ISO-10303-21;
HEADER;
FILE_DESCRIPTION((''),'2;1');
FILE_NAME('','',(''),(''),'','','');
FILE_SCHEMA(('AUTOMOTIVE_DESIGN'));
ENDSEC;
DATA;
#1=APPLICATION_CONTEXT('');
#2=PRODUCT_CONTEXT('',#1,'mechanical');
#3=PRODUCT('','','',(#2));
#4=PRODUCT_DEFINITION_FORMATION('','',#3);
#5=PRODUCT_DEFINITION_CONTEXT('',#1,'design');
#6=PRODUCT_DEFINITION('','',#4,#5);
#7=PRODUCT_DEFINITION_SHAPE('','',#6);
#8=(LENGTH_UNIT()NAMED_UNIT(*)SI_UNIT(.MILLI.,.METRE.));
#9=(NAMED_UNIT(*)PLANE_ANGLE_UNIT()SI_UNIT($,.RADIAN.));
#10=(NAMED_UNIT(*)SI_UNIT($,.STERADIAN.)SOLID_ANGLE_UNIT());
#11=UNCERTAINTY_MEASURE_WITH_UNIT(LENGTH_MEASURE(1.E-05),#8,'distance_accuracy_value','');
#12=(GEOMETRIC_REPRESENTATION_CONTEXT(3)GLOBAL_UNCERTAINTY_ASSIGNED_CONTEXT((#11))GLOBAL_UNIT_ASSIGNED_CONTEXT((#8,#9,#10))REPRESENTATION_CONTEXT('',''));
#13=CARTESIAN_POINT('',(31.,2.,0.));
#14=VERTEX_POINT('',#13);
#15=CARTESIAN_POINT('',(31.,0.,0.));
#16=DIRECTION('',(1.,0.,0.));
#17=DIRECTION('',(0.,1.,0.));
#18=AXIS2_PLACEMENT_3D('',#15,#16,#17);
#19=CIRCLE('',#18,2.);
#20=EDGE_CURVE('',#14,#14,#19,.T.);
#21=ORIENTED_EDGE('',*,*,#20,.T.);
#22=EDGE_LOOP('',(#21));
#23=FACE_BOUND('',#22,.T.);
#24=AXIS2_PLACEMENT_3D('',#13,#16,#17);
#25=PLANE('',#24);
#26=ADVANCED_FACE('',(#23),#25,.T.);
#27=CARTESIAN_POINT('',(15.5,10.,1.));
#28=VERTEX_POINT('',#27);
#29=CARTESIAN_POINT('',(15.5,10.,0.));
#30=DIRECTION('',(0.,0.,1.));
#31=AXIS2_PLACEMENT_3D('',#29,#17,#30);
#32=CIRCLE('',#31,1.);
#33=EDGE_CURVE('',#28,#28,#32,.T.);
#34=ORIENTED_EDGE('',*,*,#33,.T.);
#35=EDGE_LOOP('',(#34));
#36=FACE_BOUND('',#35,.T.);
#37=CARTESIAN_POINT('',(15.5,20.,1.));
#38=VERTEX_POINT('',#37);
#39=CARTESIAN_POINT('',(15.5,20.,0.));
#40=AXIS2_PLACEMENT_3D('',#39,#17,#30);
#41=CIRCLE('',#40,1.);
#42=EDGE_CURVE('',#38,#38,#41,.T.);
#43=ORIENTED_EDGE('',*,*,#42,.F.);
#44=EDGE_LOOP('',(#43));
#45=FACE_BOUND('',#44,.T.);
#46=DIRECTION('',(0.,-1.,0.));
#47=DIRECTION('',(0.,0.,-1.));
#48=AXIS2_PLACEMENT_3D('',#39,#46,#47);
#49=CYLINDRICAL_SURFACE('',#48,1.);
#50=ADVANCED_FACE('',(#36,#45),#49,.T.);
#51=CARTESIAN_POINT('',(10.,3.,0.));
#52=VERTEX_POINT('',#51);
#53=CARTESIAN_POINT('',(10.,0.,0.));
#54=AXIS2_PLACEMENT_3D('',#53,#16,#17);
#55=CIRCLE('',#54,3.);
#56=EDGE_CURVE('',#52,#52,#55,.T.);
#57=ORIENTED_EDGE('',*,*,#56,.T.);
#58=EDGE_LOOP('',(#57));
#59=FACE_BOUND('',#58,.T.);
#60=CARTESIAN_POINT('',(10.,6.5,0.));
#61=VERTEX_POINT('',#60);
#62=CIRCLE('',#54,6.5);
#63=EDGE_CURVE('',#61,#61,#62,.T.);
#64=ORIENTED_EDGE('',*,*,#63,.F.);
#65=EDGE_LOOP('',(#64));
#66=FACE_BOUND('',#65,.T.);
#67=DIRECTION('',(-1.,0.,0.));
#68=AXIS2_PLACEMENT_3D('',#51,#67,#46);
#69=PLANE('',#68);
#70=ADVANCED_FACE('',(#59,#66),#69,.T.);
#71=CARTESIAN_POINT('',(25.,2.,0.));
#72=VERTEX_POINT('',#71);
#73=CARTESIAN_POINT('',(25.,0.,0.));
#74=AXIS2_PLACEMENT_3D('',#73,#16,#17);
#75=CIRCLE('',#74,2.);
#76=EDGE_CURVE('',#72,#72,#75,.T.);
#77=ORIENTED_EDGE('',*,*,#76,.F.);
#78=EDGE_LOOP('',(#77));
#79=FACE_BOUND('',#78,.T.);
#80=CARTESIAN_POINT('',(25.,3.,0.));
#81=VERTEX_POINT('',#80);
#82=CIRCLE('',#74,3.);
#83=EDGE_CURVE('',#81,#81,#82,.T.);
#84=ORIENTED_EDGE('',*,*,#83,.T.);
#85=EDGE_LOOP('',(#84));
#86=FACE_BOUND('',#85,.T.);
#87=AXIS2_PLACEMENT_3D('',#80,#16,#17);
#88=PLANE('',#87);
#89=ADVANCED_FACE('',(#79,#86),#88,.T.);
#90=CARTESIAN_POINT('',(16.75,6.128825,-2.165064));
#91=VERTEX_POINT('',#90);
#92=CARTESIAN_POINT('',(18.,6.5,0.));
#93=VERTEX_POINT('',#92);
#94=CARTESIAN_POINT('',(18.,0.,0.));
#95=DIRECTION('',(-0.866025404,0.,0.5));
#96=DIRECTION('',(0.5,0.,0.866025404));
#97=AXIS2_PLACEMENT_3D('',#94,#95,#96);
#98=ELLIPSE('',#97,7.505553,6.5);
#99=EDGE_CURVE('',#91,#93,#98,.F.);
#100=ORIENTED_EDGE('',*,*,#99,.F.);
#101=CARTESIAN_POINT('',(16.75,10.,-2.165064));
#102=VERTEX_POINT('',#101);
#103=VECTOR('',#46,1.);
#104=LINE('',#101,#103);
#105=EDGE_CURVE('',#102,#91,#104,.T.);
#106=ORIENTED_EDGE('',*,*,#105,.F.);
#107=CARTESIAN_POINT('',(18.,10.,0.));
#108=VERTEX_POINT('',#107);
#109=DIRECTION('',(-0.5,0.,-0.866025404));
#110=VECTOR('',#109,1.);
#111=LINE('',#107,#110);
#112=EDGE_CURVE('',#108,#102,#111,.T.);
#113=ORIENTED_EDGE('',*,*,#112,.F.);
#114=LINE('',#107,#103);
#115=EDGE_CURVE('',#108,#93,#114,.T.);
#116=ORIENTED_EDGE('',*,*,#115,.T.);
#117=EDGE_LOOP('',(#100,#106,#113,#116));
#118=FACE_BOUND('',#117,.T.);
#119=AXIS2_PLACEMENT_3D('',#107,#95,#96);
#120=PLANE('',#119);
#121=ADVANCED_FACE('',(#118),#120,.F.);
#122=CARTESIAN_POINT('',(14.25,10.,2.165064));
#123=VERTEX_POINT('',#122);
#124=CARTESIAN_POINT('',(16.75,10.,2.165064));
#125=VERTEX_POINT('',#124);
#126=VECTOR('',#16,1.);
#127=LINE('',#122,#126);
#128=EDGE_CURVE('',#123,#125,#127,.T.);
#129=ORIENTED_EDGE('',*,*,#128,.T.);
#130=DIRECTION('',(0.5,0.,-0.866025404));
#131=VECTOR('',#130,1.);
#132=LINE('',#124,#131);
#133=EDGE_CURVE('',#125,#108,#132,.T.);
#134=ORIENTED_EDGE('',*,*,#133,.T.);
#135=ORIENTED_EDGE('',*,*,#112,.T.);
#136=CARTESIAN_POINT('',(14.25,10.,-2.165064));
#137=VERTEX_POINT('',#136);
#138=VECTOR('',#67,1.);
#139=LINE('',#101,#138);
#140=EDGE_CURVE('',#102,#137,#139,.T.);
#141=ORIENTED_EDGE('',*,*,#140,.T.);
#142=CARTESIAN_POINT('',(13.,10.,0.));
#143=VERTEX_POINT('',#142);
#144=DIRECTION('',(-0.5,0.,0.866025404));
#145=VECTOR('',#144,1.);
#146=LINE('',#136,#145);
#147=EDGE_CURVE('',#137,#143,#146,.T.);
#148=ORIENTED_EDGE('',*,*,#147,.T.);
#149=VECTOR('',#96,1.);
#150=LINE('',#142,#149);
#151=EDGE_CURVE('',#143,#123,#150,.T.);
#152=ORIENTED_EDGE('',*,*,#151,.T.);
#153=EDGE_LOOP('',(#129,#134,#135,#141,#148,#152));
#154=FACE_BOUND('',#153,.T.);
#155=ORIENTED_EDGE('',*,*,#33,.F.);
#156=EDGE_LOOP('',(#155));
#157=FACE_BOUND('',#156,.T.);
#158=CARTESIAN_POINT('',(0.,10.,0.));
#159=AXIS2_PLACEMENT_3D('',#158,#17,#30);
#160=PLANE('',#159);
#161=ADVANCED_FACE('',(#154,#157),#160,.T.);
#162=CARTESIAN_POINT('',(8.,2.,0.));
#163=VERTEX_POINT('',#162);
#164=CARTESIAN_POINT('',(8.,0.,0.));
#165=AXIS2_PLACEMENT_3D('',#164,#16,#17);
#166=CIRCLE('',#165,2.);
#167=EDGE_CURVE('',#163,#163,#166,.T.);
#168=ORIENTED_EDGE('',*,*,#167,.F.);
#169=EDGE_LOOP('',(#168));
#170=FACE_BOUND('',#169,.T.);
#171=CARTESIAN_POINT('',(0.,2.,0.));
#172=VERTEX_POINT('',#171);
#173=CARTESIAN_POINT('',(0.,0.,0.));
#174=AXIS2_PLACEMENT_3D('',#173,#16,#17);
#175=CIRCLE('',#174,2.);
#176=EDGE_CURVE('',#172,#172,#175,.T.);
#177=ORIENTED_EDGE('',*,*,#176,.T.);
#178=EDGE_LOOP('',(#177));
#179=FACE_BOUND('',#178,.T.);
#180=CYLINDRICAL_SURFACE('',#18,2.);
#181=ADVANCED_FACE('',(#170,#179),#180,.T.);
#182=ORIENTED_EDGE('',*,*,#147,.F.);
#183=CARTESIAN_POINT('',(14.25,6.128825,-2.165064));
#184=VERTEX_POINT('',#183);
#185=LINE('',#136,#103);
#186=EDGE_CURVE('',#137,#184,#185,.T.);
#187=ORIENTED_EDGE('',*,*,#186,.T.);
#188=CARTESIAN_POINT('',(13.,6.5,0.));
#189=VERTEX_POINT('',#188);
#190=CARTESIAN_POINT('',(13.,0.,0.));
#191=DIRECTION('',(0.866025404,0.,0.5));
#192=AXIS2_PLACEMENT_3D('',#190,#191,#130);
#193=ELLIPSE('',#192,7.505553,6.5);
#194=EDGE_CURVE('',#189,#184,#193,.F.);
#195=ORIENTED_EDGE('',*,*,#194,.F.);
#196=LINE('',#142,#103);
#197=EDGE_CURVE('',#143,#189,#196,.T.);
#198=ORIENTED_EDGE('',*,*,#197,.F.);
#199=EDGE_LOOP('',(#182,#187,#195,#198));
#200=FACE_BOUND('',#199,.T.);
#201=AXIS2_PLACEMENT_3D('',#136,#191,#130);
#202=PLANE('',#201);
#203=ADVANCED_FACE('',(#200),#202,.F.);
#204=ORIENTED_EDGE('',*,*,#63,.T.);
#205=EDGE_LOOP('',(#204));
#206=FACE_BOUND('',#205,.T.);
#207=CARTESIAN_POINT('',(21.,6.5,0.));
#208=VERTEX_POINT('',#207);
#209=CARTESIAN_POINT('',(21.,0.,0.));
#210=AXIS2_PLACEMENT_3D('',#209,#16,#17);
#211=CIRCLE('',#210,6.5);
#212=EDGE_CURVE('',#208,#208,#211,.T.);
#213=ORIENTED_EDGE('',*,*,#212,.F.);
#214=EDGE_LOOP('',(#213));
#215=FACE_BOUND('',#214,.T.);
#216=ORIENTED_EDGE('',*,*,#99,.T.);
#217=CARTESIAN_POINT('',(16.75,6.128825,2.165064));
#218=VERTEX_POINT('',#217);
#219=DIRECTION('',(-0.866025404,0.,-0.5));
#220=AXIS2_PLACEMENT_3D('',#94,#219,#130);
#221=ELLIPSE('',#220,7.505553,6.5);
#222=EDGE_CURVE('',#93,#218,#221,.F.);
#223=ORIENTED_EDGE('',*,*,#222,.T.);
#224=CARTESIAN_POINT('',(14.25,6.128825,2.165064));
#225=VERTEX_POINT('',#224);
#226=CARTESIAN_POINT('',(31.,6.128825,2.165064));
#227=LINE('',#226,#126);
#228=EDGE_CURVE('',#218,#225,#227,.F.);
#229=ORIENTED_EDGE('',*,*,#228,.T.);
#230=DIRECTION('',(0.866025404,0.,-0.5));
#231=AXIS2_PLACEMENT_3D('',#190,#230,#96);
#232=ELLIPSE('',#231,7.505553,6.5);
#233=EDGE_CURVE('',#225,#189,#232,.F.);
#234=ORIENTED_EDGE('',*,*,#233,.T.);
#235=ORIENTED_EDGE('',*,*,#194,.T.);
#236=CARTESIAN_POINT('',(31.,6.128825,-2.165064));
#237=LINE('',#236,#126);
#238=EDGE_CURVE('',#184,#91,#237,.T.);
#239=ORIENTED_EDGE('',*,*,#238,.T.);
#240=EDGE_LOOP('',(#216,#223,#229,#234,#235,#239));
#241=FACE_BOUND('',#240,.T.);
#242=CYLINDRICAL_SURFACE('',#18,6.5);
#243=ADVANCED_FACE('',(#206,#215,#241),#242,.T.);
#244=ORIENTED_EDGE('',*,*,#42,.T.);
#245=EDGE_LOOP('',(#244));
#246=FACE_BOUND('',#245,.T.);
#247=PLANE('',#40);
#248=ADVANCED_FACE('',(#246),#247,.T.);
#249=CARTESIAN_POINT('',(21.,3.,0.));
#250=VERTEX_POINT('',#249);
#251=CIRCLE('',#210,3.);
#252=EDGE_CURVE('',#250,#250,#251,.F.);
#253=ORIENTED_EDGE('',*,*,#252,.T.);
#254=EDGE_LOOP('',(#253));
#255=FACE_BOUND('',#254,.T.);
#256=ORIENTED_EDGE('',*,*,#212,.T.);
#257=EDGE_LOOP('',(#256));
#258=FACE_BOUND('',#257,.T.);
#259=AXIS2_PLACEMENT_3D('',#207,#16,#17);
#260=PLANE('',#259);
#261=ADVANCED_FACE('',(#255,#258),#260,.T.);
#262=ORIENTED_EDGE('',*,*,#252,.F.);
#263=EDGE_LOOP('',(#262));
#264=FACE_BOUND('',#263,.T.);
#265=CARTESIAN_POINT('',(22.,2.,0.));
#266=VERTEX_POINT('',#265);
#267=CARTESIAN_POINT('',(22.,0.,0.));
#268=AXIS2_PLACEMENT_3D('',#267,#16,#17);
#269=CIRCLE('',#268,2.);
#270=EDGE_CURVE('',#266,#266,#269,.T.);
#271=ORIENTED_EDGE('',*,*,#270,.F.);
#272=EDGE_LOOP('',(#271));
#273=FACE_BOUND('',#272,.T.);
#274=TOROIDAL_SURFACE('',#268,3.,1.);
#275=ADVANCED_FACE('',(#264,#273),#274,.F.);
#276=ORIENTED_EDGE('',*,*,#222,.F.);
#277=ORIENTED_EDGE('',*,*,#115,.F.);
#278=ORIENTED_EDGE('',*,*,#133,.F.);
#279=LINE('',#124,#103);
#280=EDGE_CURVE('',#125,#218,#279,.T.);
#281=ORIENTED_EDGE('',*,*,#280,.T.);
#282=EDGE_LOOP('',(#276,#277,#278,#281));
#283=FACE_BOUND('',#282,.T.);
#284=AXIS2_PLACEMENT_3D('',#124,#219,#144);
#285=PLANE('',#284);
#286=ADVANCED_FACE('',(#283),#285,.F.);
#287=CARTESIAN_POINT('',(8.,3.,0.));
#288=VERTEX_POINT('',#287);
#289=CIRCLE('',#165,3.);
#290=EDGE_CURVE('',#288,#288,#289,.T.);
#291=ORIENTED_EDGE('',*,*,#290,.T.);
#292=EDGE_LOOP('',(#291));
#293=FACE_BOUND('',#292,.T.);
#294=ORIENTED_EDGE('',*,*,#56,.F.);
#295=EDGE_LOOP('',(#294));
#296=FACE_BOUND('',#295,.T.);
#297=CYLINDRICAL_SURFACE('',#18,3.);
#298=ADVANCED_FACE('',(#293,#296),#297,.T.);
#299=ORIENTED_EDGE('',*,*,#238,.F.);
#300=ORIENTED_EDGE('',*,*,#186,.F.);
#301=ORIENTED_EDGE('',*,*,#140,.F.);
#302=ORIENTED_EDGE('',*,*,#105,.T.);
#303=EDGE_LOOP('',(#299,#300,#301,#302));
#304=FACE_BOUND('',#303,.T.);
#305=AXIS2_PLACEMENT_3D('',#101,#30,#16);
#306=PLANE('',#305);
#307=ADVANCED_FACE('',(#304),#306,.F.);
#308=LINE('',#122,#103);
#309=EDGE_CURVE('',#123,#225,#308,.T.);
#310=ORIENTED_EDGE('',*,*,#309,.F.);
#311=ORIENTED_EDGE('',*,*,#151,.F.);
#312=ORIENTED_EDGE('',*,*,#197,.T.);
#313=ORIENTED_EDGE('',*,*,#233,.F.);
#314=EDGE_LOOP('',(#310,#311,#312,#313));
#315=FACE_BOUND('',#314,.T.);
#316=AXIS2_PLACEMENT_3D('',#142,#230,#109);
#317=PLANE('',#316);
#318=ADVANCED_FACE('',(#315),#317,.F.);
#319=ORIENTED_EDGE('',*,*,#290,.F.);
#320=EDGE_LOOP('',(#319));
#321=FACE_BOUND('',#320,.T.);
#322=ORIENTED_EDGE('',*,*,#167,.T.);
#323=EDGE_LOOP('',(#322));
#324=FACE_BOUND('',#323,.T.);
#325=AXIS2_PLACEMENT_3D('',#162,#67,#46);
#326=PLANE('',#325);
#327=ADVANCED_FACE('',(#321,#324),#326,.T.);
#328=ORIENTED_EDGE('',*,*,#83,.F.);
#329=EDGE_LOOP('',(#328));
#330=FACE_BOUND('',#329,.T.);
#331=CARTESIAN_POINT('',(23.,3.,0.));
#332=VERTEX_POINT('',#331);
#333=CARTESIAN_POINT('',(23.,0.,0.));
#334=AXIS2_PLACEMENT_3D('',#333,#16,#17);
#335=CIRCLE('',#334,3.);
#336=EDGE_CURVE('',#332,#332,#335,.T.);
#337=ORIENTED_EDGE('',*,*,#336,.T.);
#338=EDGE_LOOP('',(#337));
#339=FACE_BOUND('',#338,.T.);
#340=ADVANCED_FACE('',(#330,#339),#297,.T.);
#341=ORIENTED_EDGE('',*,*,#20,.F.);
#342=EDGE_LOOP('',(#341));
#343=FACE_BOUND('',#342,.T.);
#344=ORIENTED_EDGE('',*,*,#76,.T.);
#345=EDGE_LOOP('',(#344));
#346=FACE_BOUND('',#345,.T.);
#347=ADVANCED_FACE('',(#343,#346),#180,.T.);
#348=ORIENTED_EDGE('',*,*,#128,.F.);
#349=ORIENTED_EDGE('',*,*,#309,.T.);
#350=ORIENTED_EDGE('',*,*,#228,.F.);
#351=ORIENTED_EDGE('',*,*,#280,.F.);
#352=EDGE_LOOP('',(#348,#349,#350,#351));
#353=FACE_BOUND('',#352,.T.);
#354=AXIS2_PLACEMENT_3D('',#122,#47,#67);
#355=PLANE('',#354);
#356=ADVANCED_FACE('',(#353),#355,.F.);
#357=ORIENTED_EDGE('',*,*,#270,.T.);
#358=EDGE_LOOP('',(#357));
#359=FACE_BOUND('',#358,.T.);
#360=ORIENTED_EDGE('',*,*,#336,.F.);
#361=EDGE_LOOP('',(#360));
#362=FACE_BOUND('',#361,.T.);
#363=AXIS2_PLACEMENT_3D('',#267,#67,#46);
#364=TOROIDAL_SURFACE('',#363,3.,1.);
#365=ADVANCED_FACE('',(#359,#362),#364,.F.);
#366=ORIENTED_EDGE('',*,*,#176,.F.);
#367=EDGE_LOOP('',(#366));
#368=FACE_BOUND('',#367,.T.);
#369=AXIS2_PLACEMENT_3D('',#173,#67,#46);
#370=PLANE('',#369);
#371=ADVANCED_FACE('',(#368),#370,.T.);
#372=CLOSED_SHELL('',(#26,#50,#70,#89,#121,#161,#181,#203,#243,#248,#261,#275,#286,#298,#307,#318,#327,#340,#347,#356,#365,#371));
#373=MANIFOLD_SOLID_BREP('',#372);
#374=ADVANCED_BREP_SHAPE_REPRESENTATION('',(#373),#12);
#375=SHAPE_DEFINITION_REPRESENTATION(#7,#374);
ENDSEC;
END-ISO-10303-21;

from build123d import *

# Parameters (mm, degrees)
FILLET1_R           = 1
BOSS_EXTRUDE1_DEPTH = 10
SKETCH4_R           = 1
BOSS_EXTRUDE2_DEPTH = 10


with BuildPart() as part:
    # Sketch2 → Revolve1 (revolve)
    with BuildSketch(Plane.XY):
        Polygon((0, 0), (0, 2), (8, 2), (8, 3), (10, 3), (10, 6.5), (21, 6.5), (21, 2), (23, 2), (23, 3), (25, 3), (25, 2), (31, 2), (31, 0), align=None)
    revolve(axis=Axis((31, 0, 0), (-1, 0, 0)))

    # Fillet1
    fillet1_edges = [part.edges().sort_by_distance(p)[0] for p in [
        (23, -2, 0),
        (21, -2, 0),
    ]]
    fillet(fillet1_edges, radius=FILLET1_R - 0.0001)  # a hair under: the kernel refuses the full size

    # Sketch3 → Boss-Extrude1 (add)
    with BuildSketch(Plane(origin=(0, 0, 0), x_dir=(1, 0, 0), z_dir=(0, 1, 0))):
        Polygon((16.75, 2.165063509), (14.25, 2.165063509), (13, 0), (14.25, -2.165063509), (16.75, -2.165063509), (18, 0), align=None)
    extrude(amount=BOSS_EXTRUDE1_DEPTH)

    # Sketch4 → Boss-Extrude2 (add)
    with BuildSketch(Plane(origin=(0, 10, 0), x_dir=(1, 0, 0), z_dir=(0, 1, 0))):
        with Locations(Location((15.5, 0, 0), (0, 0, 270))):
            Circle(SKETCH4_R)
    extrude(amount=BOSS_EXTRUDE2_DEPTH)


solid = part.part
